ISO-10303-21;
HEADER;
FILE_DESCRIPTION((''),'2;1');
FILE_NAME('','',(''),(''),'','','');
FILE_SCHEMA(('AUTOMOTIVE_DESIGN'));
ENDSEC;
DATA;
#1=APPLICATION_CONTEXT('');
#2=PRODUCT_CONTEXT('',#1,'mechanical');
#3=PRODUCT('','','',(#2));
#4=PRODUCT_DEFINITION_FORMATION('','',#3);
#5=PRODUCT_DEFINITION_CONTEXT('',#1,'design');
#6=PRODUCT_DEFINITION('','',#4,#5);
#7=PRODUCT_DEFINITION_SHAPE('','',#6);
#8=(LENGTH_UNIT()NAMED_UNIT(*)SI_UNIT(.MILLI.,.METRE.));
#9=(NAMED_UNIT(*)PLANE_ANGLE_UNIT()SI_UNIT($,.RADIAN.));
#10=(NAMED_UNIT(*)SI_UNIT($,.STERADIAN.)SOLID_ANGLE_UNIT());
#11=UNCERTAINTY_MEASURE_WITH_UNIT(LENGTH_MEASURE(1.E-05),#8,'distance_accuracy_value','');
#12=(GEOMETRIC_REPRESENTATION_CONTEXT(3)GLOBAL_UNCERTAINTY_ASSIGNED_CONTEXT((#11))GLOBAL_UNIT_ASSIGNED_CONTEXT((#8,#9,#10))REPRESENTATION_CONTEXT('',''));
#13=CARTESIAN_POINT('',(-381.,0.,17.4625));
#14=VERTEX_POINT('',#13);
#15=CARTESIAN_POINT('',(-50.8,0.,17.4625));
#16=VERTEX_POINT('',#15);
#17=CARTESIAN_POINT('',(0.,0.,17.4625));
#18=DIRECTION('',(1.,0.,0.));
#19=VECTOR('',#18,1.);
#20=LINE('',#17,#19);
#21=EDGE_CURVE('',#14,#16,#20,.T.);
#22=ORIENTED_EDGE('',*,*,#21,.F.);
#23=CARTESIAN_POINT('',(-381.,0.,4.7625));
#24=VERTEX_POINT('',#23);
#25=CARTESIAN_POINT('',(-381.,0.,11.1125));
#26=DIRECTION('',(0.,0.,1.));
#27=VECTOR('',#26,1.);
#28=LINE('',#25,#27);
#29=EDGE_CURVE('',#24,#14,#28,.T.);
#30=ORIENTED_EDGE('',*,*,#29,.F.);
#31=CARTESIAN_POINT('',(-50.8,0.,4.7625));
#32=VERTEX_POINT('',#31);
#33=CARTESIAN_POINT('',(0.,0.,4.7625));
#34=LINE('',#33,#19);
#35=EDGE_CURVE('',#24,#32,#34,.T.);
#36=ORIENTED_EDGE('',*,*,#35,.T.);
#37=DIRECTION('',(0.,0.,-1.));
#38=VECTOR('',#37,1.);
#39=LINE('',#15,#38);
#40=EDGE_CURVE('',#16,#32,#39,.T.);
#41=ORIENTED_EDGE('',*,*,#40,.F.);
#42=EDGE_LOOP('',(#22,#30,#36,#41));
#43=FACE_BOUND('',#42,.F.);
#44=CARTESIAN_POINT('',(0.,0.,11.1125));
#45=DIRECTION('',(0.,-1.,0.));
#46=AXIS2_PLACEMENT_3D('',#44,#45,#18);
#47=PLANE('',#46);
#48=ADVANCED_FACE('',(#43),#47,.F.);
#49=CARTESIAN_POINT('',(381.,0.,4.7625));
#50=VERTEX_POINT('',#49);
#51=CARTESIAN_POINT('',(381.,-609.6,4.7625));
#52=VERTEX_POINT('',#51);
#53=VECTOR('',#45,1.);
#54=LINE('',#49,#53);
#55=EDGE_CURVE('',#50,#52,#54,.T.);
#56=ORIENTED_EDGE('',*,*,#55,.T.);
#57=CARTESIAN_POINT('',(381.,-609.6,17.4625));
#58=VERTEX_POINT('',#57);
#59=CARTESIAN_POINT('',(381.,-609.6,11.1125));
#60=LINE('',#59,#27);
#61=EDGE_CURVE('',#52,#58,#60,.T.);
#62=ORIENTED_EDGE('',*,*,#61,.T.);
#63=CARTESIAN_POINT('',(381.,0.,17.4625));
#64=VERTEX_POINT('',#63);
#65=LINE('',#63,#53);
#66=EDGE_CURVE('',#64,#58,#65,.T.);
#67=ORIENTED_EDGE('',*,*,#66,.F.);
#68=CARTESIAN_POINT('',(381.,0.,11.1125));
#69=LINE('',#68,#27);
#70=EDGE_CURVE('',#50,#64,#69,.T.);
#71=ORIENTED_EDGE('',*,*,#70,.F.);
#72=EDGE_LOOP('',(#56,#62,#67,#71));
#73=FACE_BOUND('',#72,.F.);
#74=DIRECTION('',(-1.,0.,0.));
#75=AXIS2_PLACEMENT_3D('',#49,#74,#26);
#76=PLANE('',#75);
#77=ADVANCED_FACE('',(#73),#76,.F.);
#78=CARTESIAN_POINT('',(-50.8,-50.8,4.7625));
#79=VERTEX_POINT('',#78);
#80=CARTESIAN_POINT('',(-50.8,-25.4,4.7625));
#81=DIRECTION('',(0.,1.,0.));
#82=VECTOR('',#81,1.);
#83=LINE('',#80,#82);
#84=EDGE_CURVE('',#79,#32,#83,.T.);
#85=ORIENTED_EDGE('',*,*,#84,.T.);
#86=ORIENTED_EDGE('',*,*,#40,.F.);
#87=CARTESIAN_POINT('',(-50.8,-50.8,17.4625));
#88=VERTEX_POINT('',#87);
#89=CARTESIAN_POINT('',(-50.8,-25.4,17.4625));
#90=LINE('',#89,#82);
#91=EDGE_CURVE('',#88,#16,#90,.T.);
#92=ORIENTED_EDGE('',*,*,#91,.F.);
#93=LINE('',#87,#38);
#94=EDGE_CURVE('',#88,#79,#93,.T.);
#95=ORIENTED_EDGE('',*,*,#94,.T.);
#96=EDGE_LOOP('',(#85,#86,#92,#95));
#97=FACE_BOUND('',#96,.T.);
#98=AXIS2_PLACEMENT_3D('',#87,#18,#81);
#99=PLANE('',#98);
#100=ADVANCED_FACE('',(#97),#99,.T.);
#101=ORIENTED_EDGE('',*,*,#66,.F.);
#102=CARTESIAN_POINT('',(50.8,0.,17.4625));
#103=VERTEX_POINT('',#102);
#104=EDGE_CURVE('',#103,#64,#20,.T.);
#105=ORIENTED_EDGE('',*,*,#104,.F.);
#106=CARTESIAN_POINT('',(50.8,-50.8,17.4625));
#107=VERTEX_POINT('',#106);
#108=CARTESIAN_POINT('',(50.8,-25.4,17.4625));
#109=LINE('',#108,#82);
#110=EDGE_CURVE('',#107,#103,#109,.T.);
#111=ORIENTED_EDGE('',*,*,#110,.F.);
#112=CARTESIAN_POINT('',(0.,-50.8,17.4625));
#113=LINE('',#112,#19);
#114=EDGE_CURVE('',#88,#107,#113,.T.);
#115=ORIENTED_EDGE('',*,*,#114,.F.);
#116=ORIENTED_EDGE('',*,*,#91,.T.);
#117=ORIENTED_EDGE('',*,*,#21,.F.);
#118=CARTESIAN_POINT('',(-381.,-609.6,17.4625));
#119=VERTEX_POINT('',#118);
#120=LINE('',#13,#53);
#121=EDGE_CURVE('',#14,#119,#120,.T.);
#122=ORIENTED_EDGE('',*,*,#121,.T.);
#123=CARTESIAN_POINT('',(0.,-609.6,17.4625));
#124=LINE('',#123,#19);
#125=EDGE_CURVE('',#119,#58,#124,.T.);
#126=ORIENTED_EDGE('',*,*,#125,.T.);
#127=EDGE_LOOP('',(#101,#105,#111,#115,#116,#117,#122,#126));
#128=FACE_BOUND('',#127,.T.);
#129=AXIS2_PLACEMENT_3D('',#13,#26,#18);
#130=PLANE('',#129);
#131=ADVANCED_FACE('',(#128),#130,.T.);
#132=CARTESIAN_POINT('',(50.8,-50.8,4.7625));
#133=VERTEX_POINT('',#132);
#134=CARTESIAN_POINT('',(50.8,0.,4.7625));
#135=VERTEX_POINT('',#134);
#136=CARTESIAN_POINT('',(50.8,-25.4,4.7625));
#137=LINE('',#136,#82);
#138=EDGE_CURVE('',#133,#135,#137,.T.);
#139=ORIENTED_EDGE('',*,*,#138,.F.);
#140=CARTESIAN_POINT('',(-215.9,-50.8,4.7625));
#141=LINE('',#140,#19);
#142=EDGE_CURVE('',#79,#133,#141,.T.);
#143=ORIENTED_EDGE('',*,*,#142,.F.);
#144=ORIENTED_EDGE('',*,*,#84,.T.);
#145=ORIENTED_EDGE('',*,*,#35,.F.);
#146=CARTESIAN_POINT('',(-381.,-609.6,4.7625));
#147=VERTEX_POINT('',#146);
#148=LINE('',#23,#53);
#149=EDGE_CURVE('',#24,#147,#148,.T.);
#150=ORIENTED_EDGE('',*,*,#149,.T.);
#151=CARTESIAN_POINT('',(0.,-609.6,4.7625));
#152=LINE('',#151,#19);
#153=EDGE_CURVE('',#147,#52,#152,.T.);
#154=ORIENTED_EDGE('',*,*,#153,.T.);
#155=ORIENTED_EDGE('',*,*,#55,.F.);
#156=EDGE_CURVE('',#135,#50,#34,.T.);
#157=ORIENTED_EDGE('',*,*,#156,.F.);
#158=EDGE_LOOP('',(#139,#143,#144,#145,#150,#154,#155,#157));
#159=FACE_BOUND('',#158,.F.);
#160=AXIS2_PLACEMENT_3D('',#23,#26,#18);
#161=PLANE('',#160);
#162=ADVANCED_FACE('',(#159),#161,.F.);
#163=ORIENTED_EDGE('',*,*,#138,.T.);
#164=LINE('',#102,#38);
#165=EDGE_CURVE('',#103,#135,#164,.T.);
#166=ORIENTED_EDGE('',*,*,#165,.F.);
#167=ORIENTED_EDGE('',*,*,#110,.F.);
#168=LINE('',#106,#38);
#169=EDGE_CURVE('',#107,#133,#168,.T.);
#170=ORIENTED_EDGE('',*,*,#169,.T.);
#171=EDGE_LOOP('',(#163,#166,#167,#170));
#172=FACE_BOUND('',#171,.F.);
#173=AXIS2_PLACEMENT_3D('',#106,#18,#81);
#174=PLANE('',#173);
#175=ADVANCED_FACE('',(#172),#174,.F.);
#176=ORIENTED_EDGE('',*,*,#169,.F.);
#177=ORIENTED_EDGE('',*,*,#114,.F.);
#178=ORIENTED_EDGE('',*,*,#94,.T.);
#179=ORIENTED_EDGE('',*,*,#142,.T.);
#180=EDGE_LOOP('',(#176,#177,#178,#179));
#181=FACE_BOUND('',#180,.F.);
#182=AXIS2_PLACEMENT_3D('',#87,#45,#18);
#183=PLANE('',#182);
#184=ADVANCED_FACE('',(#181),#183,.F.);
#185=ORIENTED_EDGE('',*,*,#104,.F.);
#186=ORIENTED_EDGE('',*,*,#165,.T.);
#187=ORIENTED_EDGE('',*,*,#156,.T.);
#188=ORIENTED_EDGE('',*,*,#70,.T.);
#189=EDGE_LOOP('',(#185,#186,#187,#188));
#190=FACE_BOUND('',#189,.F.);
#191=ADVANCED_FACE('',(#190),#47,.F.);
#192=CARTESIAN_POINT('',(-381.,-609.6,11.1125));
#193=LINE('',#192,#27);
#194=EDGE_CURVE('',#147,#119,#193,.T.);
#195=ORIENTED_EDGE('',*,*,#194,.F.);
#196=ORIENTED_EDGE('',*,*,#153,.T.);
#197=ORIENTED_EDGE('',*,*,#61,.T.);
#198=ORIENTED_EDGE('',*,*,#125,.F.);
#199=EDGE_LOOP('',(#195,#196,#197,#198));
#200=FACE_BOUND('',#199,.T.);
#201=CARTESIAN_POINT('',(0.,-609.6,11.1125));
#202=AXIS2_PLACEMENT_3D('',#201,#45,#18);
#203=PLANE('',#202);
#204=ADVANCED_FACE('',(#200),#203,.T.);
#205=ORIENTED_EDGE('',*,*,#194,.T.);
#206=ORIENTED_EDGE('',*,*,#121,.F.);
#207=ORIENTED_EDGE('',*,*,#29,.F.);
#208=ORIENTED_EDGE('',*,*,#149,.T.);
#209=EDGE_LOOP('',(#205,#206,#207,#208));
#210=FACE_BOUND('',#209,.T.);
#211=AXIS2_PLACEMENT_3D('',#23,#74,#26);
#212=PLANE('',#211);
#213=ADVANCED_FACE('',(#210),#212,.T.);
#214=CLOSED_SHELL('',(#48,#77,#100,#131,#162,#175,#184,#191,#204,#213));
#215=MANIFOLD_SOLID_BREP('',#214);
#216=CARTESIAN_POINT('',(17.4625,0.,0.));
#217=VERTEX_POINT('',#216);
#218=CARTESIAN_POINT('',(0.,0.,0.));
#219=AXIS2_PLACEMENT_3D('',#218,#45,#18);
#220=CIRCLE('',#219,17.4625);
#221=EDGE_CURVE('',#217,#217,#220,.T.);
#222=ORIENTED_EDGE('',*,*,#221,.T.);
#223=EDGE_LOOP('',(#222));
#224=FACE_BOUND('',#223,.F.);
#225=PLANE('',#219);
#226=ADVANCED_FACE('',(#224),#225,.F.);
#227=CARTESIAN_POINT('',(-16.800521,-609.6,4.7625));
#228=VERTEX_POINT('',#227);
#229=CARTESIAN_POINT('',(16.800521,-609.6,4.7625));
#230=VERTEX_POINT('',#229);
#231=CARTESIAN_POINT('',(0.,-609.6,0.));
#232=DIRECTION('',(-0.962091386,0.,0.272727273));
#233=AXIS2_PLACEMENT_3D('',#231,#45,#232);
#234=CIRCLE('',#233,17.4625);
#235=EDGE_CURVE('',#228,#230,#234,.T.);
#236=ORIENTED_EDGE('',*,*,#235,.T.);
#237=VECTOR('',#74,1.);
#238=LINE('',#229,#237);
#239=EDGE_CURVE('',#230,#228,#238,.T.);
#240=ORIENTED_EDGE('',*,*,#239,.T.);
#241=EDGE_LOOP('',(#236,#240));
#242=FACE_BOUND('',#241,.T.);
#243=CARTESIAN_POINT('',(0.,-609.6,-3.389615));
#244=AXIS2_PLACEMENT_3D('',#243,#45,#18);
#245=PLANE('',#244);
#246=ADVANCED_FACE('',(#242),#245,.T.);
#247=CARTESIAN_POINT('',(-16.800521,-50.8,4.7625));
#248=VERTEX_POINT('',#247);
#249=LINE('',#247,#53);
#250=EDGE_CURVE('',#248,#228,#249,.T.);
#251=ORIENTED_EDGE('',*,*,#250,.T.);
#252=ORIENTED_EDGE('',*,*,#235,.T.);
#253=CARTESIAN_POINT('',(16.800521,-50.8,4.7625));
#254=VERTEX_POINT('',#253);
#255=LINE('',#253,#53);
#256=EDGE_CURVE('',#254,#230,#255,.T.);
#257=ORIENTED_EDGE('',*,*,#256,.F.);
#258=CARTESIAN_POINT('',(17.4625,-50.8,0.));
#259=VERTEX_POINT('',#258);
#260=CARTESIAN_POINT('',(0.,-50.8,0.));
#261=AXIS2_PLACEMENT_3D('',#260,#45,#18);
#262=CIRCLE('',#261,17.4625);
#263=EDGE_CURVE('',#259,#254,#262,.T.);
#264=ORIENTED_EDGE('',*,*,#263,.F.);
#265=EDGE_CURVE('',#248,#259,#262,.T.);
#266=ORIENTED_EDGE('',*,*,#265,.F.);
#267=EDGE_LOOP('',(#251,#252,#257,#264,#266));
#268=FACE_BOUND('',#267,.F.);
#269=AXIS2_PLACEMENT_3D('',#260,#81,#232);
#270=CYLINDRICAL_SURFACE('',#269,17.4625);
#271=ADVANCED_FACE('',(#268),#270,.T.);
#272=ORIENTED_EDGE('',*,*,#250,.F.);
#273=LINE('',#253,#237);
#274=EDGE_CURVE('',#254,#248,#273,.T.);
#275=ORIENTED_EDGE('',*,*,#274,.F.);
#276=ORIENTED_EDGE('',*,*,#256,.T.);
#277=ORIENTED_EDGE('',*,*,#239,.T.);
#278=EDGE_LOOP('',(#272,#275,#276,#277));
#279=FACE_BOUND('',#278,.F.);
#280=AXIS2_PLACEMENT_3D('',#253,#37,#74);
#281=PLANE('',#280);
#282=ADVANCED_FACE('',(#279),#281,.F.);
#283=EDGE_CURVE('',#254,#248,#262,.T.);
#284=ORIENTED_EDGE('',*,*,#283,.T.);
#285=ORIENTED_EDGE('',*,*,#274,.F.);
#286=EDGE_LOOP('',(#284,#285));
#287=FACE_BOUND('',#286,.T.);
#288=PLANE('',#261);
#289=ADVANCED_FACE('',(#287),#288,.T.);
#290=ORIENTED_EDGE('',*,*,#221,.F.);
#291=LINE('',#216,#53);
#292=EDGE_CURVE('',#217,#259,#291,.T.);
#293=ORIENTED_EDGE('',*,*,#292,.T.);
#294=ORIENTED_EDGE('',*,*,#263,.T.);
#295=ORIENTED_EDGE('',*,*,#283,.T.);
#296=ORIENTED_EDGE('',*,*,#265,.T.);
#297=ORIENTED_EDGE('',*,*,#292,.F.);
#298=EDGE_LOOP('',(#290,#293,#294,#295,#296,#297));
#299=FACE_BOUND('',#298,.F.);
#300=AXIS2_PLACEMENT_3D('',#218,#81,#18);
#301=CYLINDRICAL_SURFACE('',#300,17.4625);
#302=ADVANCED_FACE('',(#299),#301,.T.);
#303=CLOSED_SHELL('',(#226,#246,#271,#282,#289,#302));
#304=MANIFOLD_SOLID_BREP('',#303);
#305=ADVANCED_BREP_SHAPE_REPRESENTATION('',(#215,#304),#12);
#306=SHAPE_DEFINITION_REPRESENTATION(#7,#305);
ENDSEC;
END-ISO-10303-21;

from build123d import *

# Parameters (mm, degrees)
F0_R     = 17.4625
F1_DEPTH = 50.8
F3_DEPTH = 558.8
F4_W     = 762
F4_H     = 12.7
F5_DEPTH = 609.6
F6_W     = 101.6
F6_H     = 50.8
F7_DEPTH = 25.4


with BuildPart() as f1:
    # F0 (on Front) → F1 (new body)
    with BuildSketch(Plane.XZ):
        Circle(F0_R)
    extrude(amount=F1_DEPTH)

    # F2 (on face) → F3 (join)
    with BuildSketch(Plane.XZ.offset(50.8)):
        with BuildLine():
            Line((16.8005208253, 4.7625), (-16.8005208253, 4.7625))
            ThreePointArc((-16.8005208253, 4.7625), (0, -17.4625), (16.8005208253, 4.7625))
        make_face()
    extrude(amount=F3_DEPTH)


with BuildPart() as f5:
    # F4 (on Front) → F5 (new body)
    with BuildSketch(Plane.XZ):
        with Locations((0, 11.1125)):
            Rectangle(F4_W, F4_H)
    extrude(amount=F5_DEPTH)

    # F6 (on face) → F7 (cut)
    with BuildSketch(Plane.XY.offset(17.4625)):
        with Locations((0, -25.4)):
            Rectangle(F6_W, F6_H)
    extrude(amount=-F7_DEPTH, mode=Mode.SUBTRACT)


solid = Compound([f1.part, f5.part])
